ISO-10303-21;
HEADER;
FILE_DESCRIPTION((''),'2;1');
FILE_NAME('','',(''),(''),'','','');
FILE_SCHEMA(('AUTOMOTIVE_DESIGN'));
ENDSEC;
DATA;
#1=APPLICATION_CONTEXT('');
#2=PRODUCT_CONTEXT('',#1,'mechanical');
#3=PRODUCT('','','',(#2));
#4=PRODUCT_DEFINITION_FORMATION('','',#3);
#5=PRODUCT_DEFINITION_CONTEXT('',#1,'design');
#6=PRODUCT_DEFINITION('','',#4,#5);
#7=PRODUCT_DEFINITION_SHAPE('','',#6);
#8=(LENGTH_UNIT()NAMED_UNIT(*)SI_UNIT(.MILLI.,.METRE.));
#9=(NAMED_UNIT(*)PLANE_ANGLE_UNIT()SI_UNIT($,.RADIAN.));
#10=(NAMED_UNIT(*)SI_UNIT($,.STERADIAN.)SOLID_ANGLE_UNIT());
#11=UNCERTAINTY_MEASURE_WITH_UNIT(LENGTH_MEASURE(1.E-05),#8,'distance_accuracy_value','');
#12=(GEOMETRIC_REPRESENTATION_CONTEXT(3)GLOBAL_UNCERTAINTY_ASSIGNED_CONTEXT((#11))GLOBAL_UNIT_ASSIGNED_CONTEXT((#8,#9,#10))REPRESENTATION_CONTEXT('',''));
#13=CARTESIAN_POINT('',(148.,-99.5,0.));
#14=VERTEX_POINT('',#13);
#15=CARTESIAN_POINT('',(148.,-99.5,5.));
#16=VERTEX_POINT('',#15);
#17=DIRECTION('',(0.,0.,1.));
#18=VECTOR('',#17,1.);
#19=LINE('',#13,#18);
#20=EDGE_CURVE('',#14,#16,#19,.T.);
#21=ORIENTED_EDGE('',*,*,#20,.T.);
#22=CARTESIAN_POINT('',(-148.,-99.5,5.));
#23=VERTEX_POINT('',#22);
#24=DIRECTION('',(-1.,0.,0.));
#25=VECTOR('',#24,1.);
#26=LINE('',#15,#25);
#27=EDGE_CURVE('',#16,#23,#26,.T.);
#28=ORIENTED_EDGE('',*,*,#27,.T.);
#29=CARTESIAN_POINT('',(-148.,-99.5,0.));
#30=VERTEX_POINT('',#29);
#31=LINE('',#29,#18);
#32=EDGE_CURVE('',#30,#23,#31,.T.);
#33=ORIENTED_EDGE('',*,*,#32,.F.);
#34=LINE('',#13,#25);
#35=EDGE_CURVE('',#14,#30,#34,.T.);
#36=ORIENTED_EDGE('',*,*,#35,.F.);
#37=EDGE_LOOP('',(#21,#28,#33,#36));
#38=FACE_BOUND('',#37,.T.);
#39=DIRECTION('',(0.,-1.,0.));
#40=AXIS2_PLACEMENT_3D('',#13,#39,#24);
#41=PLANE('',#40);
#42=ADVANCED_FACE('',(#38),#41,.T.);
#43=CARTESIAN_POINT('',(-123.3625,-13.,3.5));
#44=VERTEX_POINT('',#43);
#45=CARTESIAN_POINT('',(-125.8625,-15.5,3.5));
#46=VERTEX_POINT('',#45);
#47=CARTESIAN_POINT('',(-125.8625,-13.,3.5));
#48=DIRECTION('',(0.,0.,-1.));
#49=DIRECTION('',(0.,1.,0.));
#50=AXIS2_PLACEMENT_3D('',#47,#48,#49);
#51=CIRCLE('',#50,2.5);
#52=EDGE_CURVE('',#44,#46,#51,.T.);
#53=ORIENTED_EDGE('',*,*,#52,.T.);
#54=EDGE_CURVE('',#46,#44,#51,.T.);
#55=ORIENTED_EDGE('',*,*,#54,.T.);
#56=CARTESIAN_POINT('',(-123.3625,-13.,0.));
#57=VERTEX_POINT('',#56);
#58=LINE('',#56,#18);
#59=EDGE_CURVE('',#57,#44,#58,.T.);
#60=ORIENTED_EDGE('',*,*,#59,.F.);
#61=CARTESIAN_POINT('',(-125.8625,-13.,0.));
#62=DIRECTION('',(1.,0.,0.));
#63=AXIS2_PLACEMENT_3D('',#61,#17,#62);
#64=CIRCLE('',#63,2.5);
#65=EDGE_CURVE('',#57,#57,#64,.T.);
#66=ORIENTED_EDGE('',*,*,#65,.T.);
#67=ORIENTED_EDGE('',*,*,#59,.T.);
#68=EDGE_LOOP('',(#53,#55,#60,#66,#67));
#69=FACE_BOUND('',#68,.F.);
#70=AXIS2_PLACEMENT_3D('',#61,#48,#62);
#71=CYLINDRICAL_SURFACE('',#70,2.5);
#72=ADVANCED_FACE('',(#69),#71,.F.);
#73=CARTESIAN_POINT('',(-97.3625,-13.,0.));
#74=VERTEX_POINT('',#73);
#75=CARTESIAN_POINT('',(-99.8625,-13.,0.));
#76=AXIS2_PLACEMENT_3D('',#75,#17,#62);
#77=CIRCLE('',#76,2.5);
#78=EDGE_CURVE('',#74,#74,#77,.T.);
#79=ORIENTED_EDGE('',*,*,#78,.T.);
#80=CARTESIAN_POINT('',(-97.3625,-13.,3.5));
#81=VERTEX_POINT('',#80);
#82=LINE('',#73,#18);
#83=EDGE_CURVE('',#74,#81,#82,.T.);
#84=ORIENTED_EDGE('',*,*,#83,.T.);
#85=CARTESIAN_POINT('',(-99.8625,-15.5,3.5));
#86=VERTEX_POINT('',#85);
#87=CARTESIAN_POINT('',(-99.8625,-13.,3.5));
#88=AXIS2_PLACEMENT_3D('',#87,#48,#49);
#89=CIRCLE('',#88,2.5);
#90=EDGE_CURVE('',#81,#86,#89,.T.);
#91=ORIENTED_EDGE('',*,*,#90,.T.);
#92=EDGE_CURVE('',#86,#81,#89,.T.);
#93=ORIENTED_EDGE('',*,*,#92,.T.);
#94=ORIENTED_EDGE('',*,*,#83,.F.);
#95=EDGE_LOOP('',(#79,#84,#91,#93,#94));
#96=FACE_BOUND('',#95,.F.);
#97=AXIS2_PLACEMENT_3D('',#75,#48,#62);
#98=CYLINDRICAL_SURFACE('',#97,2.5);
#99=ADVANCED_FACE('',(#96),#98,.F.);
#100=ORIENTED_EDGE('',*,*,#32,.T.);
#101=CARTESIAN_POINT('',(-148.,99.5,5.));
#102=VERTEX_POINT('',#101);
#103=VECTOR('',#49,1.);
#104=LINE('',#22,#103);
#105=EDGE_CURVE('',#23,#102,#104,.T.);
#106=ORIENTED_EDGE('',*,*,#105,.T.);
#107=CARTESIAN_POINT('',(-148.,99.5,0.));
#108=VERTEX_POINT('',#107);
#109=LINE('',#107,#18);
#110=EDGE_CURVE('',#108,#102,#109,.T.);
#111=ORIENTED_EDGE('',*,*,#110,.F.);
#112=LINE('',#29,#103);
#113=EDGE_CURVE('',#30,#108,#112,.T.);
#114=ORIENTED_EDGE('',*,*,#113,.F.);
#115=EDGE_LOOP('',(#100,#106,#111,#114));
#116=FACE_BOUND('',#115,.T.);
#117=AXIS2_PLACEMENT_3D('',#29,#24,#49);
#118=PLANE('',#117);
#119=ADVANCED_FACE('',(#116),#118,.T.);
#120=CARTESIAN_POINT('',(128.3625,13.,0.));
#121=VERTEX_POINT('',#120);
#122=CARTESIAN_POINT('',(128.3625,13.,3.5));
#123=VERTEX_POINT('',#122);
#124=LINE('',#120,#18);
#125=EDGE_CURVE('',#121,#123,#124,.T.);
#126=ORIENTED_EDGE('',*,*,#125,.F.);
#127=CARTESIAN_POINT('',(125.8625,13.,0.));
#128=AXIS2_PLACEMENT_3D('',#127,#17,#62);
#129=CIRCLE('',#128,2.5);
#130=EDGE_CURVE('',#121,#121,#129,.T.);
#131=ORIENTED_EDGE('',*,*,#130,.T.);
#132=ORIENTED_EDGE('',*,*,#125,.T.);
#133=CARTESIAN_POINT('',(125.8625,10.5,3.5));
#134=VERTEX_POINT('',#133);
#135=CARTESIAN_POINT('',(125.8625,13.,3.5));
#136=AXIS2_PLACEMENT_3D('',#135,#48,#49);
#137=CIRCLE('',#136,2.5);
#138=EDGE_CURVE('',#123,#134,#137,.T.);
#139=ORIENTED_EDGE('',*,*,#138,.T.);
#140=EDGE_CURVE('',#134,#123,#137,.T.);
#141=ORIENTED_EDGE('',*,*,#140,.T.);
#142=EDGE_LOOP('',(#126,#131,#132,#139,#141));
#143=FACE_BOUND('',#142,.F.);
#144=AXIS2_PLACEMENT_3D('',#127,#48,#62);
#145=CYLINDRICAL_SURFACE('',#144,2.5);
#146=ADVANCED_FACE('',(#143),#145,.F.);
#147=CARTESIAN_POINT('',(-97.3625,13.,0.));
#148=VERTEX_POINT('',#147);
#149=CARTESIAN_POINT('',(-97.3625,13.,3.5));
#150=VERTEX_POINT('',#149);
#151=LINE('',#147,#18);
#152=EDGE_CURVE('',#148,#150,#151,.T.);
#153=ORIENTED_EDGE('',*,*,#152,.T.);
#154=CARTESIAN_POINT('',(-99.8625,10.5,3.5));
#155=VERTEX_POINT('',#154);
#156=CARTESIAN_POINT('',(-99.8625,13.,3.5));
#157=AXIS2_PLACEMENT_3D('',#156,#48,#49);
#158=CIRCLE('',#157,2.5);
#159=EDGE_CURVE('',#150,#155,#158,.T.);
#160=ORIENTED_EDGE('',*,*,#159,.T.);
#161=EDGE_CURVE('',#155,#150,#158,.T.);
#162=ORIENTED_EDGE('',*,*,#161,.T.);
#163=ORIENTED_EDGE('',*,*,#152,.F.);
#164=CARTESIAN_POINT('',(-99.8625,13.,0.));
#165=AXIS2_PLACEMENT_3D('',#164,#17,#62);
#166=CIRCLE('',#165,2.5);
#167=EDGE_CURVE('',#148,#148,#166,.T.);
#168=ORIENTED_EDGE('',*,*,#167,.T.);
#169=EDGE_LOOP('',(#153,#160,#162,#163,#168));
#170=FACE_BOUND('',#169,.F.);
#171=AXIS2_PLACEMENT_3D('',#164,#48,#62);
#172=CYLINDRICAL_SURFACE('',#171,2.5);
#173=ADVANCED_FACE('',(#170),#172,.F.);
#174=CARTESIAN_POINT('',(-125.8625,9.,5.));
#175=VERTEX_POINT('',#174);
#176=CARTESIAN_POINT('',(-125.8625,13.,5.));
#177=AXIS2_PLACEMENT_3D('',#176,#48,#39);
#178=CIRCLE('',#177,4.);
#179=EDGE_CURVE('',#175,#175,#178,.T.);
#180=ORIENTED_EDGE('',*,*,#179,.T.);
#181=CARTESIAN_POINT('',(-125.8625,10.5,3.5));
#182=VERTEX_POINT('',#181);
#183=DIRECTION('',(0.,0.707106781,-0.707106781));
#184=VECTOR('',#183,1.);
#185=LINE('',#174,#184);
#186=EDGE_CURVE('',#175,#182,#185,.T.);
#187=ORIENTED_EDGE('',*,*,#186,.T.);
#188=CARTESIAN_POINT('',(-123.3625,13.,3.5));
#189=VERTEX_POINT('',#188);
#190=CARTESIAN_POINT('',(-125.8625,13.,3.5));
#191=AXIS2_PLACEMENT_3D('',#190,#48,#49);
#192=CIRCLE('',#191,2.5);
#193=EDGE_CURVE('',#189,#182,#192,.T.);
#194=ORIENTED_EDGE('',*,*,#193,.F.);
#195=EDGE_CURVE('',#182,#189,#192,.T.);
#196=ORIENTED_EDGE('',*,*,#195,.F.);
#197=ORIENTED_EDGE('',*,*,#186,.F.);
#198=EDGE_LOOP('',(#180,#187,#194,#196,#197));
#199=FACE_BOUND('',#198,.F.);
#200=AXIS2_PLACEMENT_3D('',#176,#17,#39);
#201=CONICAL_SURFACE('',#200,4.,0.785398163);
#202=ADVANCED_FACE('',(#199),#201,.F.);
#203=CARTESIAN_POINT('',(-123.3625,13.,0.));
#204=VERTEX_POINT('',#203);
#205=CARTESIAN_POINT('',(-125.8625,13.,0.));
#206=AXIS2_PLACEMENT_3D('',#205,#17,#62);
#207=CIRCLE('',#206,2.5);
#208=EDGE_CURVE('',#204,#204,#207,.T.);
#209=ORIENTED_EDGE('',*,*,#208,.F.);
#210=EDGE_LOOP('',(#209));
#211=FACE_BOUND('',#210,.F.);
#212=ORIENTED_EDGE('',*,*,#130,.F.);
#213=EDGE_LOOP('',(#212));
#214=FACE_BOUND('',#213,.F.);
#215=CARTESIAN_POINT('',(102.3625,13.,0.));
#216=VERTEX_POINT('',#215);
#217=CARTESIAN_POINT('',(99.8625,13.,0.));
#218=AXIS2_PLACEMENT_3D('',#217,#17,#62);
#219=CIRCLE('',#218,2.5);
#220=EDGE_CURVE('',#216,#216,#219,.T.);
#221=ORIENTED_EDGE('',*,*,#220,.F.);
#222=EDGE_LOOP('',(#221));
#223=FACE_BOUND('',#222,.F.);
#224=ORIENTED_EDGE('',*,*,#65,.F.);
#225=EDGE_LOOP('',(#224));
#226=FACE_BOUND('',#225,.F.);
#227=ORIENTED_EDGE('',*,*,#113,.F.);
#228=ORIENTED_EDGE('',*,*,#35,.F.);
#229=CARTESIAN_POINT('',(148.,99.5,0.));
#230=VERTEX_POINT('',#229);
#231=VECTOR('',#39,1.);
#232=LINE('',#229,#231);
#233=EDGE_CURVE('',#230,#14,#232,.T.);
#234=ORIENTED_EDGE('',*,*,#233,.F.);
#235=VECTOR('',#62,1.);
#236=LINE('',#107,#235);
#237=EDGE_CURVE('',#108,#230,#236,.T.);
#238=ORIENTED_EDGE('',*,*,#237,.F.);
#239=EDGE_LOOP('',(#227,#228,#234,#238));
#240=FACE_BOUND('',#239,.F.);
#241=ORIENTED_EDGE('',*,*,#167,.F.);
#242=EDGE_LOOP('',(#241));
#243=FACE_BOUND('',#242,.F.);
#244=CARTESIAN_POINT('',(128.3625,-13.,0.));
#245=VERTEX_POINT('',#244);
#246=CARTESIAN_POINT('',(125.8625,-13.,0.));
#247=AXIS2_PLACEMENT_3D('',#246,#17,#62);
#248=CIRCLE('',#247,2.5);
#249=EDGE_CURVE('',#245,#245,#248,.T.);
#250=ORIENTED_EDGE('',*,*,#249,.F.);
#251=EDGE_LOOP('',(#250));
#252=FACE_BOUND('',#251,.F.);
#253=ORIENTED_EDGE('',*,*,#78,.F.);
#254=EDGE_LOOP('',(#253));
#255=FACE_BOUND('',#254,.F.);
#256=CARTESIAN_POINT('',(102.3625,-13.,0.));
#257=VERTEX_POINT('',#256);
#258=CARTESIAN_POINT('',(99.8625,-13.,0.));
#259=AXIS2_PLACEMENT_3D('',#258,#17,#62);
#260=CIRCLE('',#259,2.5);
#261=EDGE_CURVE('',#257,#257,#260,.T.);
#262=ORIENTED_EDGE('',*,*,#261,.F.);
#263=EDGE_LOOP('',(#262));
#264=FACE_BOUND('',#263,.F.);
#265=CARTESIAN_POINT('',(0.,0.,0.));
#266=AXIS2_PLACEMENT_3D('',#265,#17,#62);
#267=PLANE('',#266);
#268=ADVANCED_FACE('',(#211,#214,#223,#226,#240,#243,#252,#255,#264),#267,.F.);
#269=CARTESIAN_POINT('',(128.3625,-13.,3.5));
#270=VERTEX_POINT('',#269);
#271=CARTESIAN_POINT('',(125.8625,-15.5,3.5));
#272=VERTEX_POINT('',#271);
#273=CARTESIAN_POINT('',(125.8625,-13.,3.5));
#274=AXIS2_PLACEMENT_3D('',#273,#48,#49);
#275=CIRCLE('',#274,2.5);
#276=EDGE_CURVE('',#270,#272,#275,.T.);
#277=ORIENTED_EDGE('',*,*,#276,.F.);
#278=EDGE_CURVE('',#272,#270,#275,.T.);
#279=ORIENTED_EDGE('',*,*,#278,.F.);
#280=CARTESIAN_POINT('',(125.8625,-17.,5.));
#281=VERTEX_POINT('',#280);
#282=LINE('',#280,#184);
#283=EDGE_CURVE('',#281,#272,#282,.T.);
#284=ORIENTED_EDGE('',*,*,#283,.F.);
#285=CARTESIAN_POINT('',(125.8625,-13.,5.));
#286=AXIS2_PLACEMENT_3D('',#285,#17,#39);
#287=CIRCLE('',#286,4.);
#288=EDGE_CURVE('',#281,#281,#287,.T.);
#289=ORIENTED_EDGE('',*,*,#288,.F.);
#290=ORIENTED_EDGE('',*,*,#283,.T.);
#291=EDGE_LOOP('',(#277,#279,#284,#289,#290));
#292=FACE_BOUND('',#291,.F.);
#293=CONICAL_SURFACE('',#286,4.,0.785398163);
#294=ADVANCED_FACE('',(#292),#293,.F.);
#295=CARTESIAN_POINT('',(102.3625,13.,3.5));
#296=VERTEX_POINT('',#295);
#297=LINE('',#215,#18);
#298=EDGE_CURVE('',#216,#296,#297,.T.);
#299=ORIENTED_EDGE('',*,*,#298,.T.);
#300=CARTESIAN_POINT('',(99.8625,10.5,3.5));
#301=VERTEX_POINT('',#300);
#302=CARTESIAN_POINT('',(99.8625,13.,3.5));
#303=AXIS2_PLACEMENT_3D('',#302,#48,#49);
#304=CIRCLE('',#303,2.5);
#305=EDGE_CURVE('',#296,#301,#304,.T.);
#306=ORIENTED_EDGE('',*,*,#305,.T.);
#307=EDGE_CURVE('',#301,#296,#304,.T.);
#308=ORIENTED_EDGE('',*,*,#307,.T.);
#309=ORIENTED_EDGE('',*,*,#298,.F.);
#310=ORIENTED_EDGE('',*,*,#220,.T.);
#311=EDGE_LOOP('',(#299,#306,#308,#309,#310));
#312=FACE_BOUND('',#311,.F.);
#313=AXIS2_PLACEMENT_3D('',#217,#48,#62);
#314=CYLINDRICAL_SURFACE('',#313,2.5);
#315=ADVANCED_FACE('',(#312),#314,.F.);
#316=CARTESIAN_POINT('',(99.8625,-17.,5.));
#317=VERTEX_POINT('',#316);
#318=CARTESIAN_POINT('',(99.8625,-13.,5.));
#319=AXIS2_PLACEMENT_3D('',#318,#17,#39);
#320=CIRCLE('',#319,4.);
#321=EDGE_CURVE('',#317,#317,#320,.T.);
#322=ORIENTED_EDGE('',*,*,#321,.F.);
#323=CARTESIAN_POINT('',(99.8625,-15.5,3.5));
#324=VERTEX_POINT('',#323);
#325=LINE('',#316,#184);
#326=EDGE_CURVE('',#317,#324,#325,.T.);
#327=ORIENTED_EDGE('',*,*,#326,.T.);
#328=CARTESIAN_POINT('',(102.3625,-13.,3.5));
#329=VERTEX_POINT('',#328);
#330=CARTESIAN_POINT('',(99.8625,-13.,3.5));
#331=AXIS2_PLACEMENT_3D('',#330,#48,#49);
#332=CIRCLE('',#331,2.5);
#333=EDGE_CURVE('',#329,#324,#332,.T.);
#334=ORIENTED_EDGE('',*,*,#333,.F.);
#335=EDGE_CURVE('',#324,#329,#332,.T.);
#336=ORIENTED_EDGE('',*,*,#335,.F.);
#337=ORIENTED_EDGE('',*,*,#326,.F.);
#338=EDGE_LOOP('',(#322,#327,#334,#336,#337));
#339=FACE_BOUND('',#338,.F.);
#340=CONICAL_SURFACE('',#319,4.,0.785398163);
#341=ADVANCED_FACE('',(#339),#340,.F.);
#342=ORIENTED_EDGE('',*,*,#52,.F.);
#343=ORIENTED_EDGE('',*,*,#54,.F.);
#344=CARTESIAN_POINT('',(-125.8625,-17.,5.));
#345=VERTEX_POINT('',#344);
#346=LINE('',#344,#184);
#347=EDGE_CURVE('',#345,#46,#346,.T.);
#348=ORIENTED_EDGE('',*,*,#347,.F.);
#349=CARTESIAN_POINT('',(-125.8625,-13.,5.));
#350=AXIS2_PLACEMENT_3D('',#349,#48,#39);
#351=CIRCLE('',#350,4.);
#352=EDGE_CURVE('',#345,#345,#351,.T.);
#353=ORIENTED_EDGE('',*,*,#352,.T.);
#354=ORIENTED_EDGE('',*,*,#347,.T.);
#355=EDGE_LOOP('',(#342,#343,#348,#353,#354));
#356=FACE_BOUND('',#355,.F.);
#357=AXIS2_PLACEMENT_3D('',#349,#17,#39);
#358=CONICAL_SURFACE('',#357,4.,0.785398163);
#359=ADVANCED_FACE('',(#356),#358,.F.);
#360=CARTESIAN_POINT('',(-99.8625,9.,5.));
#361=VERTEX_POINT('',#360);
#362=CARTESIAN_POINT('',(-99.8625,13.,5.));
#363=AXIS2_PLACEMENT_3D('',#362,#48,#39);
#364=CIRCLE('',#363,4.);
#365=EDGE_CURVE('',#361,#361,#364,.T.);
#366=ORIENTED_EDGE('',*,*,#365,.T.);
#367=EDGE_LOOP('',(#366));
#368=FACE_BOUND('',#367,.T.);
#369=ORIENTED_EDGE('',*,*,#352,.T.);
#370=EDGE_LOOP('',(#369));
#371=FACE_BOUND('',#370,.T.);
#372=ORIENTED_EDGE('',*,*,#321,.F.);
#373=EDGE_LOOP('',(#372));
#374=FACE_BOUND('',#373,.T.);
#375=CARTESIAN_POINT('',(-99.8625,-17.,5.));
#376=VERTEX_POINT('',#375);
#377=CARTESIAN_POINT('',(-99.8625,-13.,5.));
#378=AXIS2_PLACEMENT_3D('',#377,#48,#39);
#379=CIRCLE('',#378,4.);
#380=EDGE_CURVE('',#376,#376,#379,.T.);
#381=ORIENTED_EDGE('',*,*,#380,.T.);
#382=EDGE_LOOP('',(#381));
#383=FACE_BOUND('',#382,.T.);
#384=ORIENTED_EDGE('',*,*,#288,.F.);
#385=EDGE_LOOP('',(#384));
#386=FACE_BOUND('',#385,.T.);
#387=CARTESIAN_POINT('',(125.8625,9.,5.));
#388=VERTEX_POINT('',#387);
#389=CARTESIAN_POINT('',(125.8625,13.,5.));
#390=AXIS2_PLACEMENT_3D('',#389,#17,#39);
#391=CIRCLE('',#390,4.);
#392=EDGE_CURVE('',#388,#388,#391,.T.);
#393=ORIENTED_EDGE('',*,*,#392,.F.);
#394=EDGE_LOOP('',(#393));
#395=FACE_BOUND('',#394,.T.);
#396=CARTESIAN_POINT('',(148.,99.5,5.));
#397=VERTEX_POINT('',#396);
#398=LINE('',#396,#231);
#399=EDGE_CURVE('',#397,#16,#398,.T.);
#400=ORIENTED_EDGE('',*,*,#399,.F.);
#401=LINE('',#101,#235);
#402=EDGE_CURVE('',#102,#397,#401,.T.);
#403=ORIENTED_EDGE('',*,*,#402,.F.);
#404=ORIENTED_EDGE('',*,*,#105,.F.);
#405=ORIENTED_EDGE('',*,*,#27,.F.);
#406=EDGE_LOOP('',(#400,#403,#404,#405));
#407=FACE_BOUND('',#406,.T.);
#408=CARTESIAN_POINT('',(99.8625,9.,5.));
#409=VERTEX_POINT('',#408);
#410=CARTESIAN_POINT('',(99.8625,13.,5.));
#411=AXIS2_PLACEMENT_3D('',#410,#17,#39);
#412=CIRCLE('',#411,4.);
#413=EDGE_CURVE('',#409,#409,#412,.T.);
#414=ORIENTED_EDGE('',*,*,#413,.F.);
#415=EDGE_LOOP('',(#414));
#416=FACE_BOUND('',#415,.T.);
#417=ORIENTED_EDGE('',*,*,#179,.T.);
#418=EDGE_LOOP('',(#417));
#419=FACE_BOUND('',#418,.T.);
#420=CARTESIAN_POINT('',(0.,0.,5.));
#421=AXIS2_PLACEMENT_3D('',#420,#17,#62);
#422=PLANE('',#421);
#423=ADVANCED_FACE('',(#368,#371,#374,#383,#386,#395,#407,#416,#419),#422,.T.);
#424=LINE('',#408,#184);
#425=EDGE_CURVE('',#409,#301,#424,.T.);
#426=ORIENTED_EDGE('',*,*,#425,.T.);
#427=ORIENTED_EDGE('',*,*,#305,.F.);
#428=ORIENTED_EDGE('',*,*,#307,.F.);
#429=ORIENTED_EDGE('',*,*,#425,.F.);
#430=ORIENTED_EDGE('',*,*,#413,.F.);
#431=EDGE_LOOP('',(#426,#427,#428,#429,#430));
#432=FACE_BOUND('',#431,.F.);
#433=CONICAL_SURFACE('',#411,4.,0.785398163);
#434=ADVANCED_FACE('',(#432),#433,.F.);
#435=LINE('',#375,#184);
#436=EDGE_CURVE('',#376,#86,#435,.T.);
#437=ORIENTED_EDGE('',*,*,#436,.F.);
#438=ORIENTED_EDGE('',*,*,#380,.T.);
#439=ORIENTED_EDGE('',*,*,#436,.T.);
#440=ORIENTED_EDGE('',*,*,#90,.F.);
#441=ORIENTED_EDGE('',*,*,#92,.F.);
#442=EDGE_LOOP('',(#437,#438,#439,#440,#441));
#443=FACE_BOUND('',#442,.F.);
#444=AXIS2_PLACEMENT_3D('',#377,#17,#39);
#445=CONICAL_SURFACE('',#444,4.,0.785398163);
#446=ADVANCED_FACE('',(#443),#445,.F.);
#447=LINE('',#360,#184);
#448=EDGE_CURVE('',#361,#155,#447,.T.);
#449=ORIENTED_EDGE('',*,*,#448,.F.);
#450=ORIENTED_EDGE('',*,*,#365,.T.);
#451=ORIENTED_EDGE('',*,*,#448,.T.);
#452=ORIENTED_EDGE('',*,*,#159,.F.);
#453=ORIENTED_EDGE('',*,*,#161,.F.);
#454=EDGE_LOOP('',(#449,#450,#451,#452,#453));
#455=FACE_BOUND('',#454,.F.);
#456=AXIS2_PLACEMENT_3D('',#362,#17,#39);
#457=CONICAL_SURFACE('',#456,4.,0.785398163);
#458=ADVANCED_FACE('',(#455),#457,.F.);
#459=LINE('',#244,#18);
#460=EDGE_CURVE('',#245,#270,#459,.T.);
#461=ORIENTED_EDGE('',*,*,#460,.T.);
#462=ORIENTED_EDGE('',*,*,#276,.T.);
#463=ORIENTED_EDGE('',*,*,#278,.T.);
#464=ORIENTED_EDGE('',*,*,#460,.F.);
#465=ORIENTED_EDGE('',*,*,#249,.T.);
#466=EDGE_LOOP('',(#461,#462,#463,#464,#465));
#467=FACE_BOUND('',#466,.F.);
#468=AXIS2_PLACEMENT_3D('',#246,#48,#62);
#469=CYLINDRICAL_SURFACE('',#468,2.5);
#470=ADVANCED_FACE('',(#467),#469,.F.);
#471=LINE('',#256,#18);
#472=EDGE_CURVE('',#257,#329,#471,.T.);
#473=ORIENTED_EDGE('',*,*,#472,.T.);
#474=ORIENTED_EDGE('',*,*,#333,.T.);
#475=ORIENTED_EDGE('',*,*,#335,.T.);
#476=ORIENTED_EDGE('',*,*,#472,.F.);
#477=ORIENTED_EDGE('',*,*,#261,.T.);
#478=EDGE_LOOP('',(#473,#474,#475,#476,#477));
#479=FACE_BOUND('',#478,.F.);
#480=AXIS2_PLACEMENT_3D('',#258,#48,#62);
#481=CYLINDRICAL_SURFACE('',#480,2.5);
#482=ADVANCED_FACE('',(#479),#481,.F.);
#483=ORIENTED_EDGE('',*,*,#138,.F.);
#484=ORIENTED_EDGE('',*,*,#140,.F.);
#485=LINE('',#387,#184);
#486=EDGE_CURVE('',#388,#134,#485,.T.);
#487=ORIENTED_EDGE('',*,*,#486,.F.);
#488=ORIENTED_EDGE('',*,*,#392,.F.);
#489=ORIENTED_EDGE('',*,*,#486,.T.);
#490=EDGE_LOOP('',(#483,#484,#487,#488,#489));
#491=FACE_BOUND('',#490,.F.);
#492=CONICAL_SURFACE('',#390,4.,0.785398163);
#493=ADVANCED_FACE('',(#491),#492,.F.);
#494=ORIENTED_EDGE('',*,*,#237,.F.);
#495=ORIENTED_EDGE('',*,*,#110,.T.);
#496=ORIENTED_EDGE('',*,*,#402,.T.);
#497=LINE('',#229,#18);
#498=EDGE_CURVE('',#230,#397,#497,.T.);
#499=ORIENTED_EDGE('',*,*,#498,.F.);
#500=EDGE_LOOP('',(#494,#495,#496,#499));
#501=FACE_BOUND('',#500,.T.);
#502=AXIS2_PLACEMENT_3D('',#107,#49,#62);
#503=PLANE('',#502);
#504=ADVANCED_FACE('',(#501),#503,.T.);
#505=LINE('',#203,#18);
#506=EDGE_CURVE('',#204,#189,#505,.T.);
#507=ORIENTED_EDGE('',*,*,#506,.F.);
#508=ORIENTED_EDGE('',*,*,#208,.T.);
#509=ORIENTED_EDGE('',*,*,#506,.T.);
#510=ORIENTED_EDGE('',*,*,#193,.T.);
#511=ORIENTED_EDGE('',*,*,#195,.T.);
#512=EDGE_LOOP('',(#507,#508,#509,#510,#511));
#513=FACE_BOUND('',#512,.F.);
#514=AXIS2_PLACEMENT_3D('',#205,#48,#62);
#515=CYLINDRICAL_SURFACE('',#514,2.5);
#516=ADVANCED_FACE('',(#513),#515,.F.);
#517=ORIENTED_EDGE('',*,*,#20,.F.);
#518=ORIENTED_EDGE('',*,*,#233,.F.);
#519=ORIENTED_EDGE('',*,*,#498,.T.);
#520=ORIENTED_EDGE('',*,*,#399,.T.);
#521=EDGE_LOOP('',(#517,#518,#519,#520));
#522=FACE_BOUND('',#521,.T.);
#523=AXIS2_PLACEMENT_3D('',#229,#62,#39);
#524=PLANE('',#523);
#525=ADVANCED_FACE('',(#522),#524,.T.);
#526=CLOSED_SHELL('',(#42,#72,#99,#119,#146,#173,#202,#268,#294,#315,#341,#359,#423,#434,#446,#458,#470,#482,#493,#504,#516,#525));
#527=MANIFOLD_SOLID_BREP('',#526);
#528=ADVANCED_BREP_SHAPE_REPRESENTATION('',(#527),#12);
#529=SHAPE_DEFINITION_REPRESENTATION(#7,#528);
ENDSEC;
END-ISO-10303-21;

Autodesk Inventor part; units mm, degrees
ref_plane "YZ Plane" through (0, 0, 0) normal (1, 0, 0) x (0, 1, 0)
ref_plane "XZ Plane" through (0, 0, 0) normal (0, 1, 0) x (-1, 0, 0)
sketch "Sketch1" plane through (0, 0, 0) normal (0, 0, 1) x (1, 0, 0)
  line L0 (148, -99.5) -> (-148, -99.5)
  line L1 (-148, -99.5) -> (-148, 99.5)
  line L2 (-148, 99.5) -> (148, 99.5)
  line L3 (148, 99.5) -> (148, -99.5)
  line L4 (148, -99.5) -> (-148, 99.5) construction
  line L5 (-148, -99.5) -> (148, 99.5) construction
  circle A0 centre (-125.8625, 13) radius 2.5
  circle A1 centre (-125.8625, -13) radius 2.5
  circle A2 centre (-99.8625, 13) radius 2.5
  circle A3 centre (-99.8625, -13) radius 2.5
  line L6 (-125.8625, 13) -> (-125.8625, -13)
  line L7 (-125.8625, 0) -> (-98, 0)
  line L8 (0, 99.5) -> (0, -99.5) construction
  line L9 (-148, 0) -> (148, 0) construction
  circle A4 centre (125.8625, 13) radius 2.5
  circle A5 centre (125.8625, -13) radius 2.5
  circle A6 centre (99.8625, 13) radius 2.5
  circle A7 centre (99.8625, -13) radius 2.5
  line L10 (125.8625, 13) -> (125.8625, -13)
  line L11 (125.8625, 0) -> (98, 0)
  line L12 (148, 0) -> (-148, 0) construction
  point P0 (0, 0)
  dimension "d0" = 296
  dimension "d1" = 199
  dimension "d4" = 26
  dimension "d7" = 26
  dimension "d10" = 22.1375
  dimension "d14" = 5
extrude "Extrusion1" add sketch "Sketch1" along normal blind 5
hole "Hole1" at (-125.8625, 13, 5) direction (0, 0, -1) diameter 4.5 end through all countersink diameter 8 countersink angle 90
pattern_linear "Rectangular Pattern1" count 2 spacing 26 along (0, -1, 0) count 2 spacing 26 along (1, 0, 0) of "Hole1"
ref_plane "Work Plane1" through (0, -99.5, 0) normal (1, 0, 0) x (0, 0, -1)
mirror "Mirror1" about plane through (0, -99.5, 0) normal (1, 0, 0) of "Hole1", "Rectangular Pattern1"
properties part number "Y_CARRIAGE"
